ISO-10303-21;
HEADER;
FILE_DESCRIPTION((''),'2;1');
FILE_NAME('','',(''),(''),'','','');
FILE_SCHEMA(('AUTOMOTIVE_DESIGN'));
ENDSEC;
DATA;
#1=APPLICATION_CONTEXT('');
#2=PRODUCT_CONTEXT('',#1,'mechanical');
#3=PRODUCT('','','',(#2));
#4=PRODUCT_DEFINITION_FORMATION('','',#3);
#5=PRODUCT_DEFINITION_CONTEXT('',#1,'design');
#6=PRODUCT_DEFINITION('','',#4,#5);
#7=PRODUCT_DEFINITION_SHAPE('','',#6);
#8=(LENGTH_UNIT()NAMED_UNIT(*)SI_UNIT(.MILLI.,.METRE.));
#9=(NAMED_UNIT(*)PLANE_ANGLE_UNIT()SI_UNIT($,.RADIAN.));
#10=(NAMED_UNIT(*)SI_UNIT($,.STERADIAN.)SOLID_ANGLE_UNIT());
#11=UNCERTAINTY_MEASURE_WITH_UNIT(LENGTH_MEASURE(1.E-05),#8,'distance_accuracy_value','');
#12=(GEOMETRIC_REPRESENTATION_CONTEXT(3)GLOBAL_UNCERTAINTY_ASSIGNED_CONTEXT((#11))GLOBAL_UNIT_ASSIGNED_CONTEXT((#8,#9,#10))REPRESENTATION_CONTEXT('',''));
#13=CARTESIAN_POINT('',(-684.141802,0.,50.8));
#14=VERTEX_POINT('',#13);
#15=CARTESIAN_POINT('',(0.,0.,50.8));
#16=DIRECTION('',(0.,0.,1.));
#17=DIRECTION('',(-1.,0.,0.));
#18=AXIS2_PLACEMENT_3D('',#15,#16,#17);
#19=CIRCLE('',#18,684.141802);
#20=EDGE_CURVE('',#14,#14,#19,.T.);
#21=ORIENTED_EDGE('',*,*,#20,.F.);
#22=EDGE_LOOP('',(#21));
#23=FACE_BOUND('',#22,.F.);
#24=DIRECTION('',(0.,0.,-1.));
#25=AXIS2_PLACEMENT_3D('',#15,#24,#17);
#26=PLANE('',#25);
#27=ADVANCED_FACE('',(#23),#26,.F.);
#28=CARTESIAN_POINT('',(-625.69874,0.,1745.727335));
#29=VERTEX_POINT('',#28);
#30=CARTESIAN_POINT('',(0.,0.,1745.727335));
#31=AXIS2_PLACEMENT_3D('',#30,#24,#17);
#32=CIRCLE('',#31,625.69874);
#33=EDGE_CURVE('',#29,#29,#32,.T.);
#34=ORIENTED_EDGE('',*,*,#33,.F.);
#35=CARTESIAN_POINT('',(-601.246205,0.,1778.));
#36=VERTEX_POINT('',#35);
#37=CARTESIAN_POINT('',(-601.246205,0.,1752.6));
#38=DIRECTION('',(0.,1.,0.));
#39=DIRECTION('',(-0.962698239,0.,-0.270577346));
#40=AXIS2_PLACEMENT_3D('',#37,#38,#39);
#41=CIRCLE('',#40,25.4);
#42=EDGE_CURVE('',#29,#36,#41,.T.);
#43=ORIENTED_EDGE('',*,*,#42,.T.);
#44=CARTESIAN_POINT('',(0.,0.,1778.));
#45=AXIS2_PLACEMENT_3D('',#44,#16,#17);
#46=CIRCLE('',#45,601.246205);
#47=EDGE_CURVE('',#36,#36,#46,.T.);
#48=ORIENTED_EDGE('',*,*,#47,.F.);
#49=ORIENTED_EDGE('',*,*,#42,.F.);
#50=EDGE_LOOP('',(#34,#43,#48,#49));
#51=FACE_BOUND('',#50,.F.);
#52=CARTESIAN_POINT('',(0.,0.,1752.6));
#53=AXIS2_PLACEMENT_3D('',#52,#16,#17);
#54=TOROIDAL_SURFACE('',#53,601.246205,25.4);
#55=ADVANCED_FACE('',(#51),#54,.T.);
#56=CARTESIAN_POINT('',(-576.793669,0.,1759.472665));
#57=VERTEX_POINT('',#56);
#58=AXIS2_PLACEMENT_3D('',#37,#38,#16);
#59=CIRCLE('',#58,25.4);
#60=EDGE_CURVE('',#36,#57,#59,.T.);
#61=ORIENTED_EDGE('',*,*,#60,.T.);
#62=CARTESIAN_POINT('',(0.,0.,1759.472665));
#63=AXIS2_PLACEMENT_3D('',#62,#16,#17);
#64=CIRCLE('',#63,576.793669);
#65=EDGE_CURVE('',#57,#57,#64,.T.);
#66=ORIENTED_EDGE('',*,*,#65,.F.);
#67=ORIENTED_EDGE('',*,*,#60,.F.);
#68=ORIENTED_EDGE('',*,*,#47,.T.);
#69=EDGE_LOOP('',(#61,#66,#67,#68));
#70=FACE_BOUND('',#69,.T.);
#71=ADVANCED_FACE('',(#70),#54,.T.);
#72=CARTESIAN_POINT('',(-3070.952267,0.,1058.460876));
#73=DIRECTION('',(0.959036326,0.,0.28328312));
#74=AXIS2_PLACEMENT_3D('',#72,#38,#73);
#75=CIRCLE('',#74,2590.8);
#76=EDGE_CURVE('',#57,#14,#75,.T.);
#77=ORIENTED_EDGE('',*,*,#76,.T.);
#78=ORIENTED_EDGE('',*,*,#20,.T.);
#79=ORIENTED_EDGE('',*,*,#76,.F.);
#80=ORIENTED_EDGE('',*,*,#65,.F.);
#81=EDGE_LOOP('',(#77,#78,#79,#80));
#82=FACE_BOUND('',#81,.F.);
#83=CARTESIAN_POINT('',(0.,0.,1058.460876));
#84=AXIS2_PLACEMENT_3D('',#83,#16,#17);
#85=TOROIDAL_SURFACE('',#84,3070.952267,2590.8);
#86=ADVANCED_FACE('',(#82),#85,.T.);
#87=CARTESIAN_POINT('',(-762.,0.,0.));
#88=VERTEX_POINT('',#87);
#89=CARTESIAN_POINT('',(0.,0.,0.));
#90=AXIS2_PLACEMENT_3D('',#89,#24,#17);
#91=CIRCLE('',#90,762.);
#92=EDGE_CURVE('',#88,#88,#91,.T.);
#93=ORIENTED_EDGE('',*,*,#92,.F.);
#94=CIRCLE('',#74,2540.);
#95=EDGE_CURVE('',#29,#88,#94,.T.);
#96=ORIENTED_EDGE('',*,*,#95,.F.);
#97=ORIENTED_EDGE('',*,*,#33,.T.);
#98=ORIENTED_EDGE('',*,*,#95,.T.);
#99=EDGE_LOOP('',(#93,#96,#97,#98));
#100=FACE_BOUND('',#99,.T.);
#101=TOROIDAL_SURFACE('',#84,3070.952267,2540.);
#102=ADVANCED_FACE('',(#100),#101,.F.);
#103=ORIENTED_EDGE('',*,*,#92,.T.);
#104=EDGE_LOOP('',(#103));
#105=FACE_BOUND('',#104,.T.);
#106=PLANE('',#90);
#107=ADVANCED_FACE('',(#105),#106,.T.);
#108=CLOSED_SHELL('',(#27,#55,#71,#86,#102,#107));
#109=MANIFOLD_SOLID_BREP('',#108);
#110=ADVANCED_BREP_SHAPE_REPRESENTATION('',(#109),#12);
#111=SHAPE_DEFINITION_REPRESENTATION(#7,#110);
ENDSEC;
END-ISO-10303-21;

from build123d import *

# Parameters (mm, degrees)
F2_T = -50.8


# Not quite as in the source:
# - a fillet or chamfer that OpenCascade refuses, or shapes differently, is made with other operations: its cross-section is extruded or revolved along the edge and cut away or added


with BuildPart() as f1:
    # F0 (on Front) → F1 (revolve)
    with BuildSketch(Plane.XZ):
        with BuildLine():
            Line((-762, 0), (0, 0))
            Line((0, 0), (0, 1778))
            Line((0, 1778), (-635, 1778))
            ThreePointArc((-635, 1778), (-537.4071698995, 877.4933692785), (-762, 0))
        make_face()
    revolve(axis=Axis((0, 0, 889), (0, 0, -1)))

    # F2
    f2_openings = [f1.faces().sort_by_distance(p)[0] for p in [
        (0, 0, 1778),
    ]]
    offset(amount=F2_T, openings=f2_openings)

    # F3: fillet of radius 25.4 on 2 edges, made by hand

    # F3_s1 → F3_t2 (revolve, cut)
    with BuildSketch(Plane.XZ):
        with BuildLine():
            ThreePointArc((-601.2462046198, 1778), (-585.9068056848, 1772.845069531), (-576.7936693441, 1759.4726645916))
            ThreePointArc((-576.7936693441, 1759.4726645916), (-579.4173103836, 1768.7412417508), (-582.075394382, 1778))
            Line((-582.075394382, 1778), (-601.2462046198, 1778))
        make_face()
    revolve(axis=Axis((0, 0, 1778), (0, 0, 1)), mode=Mode.SUBTRACT)

    # F3_s3 → F3_t4 (revolve, cut)
    with BuildSketch(Plane.XZ):
        with BuildLine():
            ThreePointArc((-625.6987398956, 1745.7273354084), (-621.4912741508, 1767.939398935), (-601.2462046198, 1778))
            Line((-601.2462046198, 1778), (-635, 1778))
            ThreePointArc((-635, 1778), (-630.296026904, 1761.8790416292), (-625.6987398956, 1745.7273354084))
        make_face()
    revolve(axis=Axis((0, 0, 1778), (0, 0, -1)), mode=Mode.SUBTRACT)


solid = f1.part
